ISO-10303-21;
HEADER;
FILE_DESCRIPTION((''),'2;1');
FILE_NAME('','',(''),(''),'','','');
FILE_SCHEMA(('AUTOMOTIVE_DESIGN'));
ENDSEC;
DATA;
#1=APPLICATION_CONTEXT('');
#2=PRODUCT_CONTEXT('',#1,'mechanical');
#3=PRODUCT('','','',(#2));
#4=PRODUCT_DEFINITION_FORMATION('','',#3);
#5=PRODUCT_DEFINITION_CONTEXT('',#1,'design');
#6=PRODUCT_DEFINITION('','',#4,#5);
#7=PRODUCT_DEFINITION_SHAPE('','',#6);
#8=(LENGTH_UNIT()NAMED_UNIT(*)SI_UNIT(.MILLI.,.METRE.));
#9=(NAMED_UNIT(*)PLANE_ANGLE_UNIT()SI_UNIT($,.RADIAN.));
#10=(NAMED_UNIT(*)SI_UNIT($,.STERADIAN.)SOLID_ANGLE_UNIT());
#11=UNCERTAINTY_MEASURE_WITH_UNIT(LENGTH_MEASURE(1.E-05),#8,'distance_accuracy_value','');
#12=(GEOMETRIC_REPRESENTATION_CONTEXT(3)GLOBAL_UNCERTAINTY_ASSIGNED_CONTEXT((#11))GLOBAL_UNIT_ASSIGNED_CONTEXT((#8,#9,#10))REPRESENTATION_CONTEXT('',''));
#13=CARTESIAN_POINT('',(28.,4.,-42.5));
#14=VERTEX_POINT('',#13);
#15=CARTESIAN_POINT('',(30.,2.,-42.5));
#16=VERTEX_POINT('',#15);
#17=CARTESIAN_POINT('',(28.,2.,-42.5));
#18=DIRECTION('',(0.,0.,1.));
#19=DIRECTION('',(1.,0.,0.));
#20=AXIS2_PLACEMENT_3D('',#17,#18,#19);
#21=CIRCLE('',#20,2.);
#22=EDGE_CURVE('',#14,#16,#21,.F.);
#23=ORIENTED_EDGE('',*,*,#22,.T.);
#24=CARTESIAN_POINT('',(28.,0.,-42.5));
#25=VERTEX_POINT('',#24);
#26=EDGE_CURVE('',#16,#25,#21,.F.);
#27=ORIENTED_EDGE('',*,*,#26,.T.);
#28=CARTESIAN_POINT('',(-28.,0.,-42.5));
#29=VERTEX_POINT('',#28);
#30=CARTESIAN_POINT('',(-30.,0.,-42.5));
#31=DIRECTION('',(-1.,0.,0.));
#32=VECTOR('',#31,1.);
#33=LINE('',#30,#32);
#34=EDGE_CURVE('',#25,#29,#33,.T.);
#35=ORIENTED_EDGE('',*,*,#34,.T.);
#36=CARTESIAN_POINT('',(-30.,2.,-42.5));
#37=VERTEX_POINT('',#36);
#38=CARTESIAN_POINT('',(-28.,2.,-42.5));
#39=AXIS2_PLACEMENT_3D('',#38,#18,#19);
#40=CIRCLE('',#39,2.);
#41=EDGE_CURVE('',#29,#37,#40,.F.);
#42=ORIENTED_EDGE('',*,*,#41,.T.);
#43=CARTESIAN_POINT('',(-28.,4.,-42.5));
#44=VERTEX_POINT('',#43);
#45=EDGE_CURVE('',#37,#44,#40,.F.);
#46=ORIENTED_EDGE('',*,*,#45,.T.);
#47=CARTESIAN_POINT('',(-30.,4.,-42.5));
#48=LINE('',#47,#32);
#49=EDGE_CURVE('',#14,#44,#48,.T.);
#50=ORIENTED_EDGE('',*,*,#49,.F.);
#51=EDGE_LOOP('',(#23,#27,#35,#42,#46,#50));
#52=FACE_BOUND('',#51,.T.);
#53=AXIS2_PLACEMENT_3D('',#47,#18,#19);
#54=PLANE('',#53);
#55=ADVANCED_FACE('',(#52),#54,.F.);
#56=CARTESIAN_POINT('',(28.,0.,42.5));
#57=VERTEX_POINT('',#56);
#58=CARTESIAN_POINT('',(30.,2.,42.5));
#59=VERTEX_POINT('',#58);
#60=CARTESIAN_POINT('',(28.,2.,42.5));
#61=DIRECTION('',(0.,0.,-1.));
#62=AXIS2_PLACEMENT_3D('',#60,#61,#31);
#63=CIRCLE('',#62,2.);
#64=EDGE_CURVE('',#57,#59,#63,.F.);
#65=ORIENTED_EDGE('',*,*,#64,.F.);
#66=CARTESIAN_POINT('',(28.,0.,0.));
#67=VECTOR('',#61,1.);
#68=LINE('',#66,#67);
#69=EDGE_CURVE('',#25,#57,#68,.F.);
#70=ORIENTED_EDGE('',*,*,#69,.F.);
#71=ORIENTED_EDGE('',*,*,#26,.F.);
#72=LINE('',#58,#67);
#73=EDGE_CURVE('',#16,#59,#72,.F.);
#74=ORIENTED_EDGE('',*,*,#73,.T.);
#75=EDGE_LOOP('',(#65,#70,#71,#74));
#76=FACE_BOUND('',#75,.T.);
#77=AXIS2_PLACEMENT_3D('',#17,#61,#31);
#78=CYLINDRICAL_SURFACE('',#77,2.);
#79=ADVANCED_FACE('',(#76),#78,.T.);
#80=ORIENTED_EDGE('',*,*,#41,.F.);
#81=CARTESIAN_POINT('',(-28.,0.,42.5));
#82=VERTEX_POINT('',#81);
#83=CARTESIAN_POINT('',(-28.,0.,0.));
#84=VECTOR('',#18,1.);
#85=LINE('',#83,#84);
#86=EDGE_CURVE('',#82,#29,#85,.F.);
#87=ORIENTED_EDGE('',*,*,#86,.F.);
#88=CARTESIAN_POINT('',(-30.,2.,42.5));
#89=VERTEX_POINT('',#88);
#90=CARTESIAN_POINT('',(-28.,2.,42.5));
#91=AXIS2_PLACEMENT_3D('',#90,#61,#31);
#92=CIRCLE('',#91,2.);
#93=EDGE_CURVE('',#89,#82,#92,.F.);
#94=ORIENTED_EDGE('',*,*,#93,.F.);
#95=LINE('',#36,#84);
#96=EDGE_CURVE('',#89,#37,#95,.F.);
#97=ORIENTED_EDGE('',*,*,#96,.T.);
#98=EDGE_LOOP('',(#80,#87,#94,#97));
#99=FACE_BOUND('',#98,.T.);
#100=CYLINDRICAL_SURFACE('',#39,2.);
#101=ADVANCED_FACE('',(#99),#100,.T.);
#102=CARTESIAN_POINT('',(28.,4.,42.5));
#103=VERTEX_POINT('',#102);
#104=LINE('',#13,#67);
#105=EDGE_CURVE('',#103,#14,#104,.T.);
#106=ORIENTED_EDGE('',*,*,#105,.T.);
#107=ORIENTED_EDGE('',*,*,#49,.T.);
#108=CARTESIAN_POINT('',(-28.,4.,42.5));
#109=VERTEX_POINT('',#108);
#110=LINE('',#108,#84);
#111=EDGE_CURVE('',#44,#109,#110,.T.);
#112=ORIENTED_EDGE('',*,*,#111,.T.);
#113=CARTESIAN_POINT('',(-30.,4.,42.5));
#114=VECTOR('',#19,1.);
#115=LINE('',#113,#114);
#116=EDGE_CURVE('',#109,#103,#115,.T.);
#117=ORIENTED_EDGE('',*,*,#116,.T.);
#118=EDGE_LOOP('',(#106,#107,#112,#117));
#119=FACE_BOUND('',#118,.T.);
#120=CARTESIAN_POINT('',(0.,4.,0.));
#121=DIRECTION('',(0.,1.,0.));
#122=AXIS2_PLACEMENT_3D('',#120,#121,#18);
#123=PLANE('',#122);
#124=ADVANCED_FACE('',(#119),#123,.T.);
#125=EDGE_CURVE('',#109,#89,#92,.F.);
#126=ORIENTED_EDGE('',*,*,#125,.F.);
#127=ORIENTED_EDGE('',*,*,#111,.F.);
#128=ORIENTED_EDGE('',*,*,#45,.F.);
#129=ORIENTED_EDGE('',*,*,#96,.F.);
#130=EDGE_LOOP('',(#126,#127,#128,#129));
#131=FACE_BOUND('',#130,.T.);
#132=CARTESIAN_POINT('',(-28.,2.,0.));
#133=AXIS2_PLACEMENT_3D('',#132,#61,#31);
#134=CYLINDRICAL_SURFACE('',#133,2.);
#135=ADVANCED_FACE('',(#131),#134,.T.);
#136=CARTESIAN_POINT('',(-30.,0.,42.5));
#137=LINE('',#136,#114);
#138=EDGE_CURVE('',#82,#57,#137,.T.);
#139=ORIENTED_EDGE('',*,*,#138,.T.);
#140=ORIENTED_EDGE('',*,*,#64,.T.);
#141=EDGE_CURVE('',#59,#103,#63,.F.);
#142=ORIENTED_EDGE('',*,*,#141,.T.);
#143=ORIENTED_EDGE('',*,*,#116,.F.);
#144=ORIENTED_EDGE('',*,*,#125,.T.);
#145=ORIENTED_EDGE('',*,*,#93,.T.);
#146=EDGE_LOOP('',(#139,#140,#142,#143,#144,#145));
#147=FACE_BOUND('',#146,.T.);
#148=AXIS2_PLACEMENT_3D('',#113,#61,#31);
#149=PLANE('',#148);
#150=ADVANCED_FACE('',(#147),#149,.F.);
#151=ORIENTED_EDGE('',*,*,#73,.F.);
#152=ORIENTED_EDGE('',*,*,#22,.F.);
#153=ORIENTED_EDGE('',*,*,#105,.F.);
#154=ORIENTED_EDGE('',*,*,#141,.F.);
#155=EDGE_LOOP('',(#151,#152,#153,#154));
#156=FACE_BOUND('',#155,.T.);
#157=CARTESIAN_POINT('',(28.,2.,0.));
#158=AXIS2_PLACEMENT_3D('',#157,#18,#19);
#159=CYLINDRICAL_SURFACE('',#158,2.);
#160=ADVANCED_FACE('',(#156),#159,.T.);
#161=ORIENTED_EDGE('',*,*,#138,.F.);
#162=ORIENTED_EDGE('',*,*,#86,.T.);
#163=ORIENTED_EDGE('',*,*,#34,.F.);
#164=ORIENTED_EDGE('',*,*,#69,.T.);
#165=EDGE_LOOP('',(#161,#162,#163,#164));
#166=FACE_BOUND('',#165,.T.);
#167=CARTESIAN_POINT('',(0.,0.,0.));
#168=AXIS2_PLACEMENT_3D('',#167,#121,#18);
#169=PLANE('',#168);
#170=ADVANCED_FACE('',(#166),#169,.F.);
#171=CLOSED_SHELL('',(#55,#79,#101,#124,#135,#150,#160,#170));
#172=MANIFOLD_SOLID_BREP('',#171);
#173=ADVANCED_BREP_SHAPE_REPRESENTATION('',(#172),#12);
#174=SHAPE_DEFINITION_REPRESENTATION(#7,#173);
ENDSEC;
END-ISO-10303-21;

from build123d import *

# Parameters (mm, degrees)
SKETCH2_W           = 60
SKETCH2_H           = 85
BOSS_EXTRUDE1_DEPTH = 4
FILLET1_R           = 2


with BuildPart() as part:
    # Sketch2 → Boss-Extrude1 (new body)
    with BuildSketch(Plane(origin=(0, 0, 0), x_dir=(1, 0, 0), z_dir=(0, 1, 0))):
        Rectangle(SKETCH2_W, SKETCH2_H)
    extrude(amount=BOSS_EXTRUDE1_DEPTH)

    # Fillet1
    fillet1_edges = [part.edges().sort_by_distance(p)[0] for p in [
        (30, 0, 0),
        (-30, 0, 0),
        (-30, 4, 0),
        (30, 4, 0),
    ]]
    fillet(fillet1_edges, radius=FILLET1_R - 0.0001)  # a hair under: the kernel refuses the full size


solid = part.part
